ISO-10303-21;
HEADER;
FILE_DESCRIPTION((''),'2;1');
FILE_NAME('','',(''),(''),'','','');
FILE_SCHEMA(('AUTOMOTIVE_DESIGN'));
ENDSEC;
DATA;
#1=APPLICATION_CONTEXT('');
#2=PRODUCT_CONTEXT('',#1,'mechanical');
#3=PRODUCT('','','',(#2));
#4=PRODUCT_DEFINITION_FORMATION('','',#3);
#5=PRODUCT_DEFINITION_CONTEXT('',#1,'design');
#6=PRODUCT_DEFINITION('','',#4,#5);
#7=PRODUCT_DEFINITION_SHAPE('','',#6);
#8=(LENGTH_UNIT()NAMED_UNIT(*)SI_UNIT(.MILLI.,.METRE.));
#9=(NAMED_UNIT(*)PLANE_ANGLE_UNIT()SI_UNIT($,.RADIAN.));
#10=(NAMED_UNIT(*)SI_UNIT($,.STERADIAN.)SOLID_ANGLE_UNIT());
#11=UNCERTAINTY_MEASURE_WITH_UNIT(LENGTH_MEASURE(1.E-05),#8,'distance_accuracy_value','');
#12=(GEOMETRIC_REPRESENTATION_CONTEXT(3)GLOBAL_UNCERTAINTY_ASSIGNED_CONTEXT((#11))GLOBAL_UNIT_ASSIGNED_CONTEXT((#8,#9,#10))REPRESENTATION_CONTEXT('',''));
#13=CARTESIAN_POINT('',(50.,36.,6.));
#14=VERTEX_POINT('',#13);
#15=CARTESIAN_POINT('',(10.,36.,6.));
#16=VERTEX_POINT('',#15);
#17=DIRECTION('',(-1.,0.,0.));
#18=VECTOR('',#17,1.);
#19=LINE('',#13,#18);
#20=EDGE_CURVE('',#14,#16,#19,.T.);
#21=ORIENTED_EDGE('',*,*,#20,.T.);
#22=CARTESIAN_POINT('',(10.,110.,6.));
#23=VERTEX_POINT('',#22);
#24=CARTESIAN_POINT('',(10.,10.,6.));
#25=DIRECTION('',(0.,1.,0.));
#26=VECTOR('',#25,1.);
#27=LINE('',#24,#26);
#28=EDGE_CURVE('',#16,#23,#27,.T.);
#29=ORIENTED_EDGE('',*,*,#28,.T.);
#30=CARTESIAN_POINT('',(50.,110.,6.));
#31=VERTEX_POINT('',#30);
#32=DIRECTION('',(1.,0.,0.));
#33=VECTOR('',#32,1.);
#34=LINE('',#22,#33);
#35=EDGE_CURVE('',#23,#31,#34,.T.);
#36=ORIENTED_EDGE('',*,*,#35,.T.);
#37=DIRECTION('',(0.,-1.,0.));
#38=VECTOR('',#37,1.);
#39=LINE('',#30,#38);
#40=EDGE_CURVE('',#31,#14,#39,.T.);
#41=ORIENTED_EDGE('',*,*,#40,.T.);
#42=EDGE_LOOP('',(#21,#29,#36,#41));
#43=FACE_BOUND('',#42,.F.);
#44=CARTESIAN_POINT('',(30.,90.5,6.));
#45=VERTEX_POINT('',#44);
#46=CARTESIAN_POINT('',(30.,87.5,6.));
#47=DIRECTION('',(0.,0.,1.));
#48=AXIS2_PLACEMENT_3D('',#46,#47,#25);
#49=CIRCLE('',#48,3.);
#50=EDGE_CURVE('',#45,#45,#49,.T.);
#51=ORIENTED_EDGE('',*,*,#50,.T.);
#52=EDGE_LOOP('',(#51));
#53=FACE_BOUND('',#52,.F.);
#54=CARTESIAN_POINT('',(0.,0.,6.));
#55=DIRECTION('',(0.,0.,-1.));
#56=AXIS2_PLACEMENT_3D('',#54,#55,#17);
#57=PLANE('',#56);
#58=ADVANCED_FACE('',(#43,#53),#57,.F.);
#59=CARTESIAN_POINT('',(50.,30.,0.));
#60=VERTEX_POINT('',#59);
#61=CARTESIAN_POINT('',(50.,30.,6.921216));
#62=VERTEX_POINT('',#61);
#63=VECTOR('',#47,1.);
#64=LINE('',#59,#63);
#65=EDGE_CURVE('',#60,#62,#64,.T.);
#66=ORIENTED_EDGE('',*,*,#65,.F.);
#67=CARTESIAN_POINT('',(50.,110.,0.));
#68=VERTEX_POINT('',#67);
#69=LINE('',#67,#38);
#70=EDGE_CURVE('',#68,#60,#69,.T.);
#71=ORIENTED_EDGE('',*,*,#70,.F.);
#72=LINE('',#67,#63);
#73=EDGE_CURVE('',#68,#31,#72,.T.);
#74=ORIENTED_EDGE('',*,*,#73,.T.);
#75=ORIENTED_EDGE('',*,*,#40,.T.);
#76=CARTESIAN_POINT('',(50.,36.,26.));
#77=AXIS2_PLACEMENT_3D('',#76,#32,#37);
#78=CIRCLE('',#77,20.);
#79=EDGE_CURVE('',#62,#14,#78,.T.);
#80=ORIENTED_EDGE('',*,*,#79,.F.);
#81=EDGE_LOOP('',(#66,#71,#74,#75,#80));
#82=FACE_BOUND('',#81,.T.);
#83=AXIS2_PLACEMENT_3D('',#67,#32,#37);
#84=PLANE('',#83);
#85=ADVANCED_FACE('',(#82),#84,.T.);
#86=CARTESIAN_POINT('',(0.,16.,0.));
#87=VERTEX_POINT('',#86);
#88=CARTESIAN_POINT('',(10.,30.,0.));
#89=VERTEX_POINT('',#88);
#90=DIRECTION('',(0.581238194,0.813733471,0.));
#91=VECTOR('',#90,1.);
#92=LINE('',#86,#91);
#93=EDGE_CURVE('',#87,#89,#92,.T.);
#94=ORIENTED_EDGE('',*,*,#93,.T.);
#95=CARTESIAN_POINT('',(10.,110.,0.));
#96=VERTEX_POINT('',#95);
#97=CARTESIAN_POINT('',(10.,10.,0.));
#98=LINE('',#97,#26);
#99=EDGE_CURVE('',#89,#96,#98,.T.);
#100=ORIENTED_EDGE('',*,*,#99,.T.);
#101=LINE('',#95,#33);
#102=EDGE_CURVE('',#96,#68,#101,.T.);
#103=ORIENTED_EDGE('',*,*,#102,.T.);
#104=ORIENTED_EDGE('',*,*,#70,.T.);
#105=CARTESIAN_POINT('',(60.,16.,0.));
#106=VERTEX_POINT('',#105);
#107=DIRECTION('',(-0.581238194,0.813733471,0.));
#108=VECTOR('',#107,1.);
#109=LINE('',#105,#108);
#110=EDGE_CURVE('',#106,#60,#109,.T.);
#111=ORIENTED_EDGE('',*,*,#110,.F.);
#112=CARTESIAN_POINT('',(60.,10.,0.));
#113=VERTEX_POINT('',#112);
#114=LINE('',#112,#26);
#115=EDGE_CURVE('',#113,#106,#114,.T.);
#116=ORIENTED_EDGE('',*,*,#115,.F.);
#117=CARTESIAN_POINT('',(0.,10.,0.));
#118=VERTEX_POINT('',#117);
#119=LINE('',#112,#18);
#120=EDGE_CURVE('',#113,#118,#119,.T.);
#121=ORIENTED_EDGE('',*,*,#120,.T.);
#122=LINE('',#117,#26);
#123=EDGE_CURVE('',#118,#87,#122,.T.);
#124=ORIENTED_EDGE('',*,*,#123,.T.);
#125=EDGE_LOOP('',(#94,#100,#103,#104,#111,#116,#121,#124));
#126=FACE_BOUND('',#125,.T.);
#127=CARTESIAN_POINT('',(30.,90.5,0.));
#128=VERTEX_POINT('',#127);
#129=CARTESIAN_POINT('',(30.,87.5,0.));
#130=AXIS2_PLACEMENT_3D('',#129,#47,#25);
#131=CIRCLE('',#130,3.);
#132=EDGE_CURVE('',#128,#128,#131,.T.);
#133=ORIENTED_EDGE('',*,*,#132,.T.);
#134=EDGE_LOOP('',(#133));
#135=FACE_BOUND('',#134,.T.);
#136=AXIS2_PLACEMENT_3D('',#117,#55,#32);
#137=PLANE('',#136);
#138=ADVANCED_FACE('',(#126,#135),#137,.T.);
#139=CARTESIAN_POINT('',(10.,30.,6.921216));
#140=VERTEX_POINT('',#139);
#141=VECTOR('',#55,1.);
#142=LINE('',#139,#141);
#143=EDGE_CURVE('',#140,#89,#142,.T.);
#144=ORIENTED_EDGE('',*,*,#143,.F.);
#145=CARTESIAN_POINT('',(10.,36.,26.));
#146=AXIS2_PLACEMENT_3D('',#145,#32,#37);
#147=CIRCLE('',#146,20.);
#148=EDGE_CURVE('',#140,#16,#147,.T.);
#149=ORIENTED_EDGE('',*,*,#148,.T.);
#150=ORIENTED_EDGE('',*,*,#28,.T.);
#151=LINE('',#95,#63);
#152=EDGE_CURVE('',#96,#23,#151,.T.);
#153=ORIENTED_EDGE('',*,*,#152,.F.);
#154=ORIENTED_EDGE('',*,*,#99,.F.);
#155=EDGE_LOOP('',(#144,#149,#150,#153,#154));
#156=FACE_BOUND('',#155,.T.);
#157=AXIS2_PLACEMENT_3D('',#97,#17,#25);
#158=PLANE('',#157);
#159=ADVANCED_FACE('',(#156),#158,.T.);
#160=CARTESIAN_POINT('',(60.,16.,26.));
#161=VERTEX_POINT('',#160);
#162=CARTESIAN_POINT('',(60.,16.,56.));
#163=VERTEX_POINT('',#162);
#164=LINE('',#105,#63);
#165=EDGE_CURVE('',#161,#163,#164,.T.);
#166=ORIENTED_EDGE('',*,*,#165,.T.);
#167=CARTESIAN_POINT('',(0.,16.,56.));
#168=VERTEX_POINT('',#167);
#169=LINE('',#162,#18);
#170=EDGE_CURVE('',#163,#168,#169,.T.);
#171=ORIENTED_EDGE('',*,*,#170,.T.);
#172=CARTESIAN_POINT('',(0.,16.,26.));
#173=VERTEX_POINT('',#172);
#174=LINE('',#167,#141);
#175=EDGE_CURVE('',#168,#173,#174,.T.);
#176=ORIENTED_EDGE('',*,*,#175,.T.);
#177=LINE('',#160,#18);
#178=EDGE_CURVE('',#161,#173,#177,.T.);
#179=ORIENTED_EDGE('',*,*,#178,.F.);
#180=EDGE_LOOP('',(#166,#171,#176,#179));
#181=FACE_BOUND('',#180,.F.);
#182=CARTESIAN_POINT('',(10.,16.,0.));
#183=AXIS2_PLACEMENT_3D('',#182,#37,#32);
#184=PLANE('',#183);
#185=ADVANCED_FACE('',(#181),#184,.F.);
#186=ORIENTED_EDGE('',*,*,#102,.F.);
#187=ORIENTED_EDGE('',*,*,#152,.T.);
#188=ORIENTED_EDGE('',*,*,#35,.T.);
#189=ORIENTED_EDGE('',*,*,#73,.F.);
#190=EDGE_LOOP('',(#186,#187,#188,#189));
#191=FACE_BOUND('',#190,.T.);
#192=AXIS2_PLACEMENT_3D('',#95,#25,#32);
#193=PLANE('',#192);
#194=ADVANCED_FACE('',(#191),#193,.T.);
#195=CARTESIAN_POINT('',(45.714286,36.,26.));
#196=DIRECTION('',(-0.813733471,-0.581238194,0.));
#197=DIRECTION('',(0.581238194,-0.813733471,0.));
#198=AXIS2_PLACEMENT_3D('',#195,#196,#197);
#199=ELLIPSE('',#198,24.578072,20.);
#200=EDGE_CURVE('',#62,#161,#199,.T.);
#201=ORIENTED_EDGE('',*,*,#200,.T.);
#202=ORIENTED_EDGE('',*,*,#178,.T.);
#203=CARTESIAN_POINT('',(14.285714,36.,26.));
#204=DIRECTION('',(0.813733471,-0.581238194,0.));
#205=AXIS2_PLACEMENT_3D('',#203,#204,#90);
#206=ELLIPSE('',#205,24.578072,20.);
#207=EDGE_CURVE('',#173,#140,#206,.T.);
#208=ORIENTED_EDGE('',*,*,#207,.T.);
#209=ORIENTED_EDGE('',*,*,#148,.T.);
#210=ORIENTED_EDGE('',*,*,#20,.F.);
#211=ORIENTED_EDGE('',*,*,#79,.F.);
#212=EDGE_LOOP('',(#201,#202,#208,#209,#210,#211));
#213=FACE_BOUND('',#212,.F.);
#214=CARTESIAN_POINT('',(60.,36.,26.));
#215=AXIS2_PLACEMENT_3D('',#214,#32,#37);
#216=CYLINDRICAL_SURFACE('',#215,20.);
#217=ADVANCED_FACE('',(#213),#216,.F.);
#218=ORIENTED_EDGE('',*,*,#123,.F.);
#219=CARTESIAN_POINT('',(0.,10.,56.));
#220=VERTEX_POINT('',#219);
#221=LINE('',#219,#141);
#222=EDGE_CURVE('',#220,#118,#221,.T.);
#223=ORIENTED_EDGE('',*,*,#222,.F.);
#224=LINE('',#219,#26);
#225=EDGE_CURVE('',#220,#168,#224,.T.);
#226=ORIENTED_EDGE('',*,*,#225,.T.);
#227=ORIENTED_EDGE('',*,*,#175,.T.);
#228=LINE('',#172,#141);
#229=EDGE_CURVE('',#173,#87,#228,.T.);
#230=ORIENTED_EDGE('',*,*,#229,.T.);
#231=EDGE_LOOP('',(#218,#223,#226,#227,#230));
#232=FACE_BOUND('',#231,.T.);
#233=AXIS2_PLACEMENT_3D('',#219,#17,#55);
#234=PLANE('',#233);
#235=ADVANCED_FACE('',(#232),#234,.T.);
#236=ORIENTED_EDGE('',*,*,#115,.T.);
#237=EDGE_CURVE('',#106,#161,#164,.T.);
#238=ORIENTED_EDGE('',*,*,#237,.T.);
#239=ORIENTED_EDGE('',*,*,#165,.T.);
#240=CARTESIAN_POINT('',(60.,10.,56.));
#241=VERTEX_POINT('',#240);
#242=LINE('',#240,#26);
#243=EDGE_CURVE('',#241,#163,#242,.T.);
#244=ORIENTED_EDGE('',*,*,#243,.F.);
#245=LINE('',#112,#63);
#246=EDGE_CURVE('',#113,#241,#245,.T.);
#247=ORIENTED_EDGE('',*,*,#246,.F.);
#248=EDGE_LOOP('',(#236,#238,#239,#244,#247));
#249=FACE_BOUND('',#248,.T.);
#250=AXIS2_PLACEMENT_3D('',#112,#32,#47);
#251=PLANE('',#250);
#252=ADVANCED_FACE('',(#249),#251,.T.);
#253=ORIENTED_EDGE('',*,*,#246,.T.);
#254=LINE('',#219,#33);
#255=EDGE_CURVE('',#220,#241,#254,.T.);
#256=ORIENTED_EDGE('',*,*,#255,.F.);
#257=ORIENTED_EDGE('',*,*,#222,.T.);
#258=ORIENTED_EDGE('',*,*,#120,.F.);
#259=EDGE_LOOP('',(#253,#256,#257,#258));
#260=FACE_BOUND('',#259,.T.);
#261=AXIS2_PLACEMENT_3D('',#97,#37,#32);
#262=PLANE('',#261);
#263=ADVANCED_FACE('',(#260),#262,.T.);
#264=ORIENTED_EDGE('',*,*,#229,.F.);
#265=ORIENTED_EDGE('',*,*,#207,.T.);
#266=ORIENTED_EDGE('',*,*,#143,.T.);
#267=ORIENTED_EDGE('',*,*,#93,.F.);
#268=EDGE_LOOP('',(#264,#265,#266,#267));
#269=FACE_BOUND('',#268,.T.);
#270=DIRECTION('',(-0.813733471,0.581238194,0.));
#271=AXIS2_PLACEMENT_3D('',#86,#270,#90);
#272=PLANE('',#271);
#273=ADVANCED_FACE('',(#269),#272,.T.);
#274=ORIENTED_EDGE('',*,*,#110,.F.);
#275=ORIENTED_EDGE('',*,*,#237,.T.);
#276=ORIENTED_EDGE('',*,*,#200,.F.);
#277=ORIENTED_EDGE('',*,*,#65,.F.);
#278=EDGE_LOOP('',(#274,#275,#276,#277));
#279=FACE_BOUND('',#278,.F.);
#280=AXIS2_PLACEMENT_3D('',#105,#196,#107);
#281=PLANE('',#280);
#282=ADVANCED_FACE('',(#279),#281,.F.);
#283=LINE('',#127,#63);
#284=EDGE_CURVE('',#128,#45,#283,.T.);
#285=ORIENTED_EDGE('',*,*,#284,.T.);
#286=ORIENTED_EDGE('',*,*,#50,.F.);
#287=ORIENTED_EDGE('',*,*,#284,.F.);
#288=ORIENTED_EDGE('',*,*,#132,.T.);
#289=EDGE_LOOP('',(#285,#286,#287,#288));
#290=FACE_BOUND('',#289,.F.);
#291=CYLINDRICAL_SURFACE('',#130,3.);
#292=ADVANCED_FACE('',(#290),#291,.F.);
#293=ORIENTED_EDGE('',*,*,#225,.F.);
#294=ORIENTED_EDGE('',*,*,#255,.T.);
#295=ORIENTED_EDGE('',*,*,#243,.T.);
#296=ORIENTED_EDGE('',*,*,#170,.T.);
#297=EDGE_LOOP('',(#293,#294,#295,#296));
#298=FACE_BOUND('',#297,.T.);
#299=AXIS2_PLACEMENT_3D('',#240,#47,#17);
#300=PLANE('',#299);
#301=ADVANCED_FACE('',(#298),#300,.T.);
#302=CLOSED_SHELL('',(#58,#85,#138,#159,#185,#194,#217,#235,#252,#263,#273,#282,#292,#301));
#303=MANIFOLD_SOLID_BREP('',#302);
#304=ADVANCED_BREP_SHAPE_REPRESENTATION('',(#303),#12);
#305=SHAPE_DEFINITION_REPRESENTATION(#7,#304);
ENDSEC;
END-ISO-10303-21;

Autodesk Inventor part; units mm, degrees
ref_plane "YZ Plane" through (0, 0, 0) normal (1, 0, 0) x (0, 1, 0)
ref_plane "XZ Plane" through (0, 0, 0) normal (0, 1, 0) x (-1, 0, 0)
ref_plane "XY Plane" through (0, 0, 0) normal (0, 0, 1) x (1, 0, 0)
sketch "Esquisse2" plane through (0, 0, 0) normal (0, 0, 1) x (1, 0, 0)
  line L0 (10, 110) -> (50, 110)
  line L1 (50, 110) -> (50, 10)
  line L2 (50, 10) -> (10, 10)
  line L3 (10, 10) -> (10, 110)
  line L4 (0, 132) -> (0, -22) construction
  line L5 (-10, 0) -> (60, 0) construction
  point P0 (0, 0)
  dimension "d0" = 40
  dimension "d1" = 100
  dimension "d2" = 10
  dimension "d3" = 10
extrude "Extrusion1" add sketch "Esquisse2" along normal blind 6
sketch "Esquisse3" plane through (0, 0, 6) normal (0, 0, 1) x (1, 0, 0)
  line L0 (50, 10) -> (50, 110) construction
  line L1 (50, 110) -> (10, 110) construction
  line L2 (10, 110) -> (10, 10) construction
  line L3 (10, 10) -> (50, 10) construction
  line L4 (50, 10) -> (10, 10)
  line L5 (10, 10) -> (10, 16)
  line L6 (10, 16) -> (50, 16)
  line L7 (50, 16) -> (50, 10)
  point P0 (0, 0)
  dimension "d6" = 6
extrude "Extrusion2" add sketch "Esquisse3" along normal blind 50
sketch "Esquisse4" plane through (0, 0, 0) normal (0, 0, -1) x (-1, 0, 0)
  line L0 (-50, 10) -> (-50, 110) construction
  line L1 (-10, 10) -> (-50, 10) construction
  line L2 (-10, 110) -> (-10, 10) construction
  line L3 (-50, 110) -> (-10, 110) construction
  line L4 (-10, 110) -> (-50, 110) construction
  line L5 (-50, 110) -> (-50, 65) construction
  line L6 (-50, 65) -> (-10, 65) construction
  line L7 (-10, 65) -> (-10, 110) construction
  circle A0 centre (-30, 87.5) radius 3
  point P0 (0, 0)
  dimension "d9" = 45
  dimension "d10" = 6
  dimension "d11" = 20
  dimension "d12" = 22.5
hole "Perçage1" at (30, 87.5, 0) direction (0, 0, 1) diameter 6 depth 6
sketch "Esquisse5" plane through (10, 10, 0) normal (0, -1, 0) x (1, 0, 0)
  line L0 (0, 0) -> (40, 0) construction
  line L1 (40, 0) -> (40, 56) construction
  line L2 (0, 56) -> (40, 56) construction
  line L3 (0, 0) -> (0, 56) construction
  line L4 (50, 56) -> (-10, 56)
  line L5 (-10, 56) -> (-10, 0)
  line L6 (-10, 0) -> (50, 0)
  line L7 (50, 0) -> (50, 56)
  line L8 (0, 56) -> (40, 56) construction
  point P0 (-10, 0)
  dimension "d20" = 60
  dimension "d21" = 10
extrude "Extrusion3" add sketch "Esquisse5" against normal blind 6
sketch "Esquisse6" plane through (0, 0, 0) normal (0, 0, -1) x (-1, 0, 0)
  line L0 (-10, 110) -> (-10, 16) construction
  line L1 (-50, 110) -> (-10, 110) construction
  line L2 (-50, 16) -> (-50, 110) construction
  line L3 (-60, 16) -> (-50, 16) construction
  line L4 (-60, 10) -> (-60, 16) construction
  line L5 (0, 10) -> (-60, 10) construction
  line L6 (0, 10) -> (0, 16) construction
  line L7 (-10, 16) -> (0, 16) construction
  circle A0 centre (-30, 87.5) radius 3 construction
  line L8 (0, 16) -> (-10, 30)
  line L9 (-60, 16) -> (-50, 30)
  line L10 (0, 16) -> (-10, 16)
  line L11 (-10, 16) -> (-10, 30)
  line L12 (-50, 30) -> (-50, 16)
  line L13 (-60, 16) -> (-50, 16)
  point P0 (0, 0)
  dimension "d24" = 14
  dimension "d25" = 14
extrude "Extrusion4" add sketch "Esquisse6" against normal blind 6
sketch "Sketch7" plane through (50, 110, 6) normal (1, 0, 0) x (0, 0, -1)
  point P0 (6, -110)
fillet "Fillet1" radius 20 1 edges at (30, 16, 6)
properties part number "P005_supportCapteursTripod"
